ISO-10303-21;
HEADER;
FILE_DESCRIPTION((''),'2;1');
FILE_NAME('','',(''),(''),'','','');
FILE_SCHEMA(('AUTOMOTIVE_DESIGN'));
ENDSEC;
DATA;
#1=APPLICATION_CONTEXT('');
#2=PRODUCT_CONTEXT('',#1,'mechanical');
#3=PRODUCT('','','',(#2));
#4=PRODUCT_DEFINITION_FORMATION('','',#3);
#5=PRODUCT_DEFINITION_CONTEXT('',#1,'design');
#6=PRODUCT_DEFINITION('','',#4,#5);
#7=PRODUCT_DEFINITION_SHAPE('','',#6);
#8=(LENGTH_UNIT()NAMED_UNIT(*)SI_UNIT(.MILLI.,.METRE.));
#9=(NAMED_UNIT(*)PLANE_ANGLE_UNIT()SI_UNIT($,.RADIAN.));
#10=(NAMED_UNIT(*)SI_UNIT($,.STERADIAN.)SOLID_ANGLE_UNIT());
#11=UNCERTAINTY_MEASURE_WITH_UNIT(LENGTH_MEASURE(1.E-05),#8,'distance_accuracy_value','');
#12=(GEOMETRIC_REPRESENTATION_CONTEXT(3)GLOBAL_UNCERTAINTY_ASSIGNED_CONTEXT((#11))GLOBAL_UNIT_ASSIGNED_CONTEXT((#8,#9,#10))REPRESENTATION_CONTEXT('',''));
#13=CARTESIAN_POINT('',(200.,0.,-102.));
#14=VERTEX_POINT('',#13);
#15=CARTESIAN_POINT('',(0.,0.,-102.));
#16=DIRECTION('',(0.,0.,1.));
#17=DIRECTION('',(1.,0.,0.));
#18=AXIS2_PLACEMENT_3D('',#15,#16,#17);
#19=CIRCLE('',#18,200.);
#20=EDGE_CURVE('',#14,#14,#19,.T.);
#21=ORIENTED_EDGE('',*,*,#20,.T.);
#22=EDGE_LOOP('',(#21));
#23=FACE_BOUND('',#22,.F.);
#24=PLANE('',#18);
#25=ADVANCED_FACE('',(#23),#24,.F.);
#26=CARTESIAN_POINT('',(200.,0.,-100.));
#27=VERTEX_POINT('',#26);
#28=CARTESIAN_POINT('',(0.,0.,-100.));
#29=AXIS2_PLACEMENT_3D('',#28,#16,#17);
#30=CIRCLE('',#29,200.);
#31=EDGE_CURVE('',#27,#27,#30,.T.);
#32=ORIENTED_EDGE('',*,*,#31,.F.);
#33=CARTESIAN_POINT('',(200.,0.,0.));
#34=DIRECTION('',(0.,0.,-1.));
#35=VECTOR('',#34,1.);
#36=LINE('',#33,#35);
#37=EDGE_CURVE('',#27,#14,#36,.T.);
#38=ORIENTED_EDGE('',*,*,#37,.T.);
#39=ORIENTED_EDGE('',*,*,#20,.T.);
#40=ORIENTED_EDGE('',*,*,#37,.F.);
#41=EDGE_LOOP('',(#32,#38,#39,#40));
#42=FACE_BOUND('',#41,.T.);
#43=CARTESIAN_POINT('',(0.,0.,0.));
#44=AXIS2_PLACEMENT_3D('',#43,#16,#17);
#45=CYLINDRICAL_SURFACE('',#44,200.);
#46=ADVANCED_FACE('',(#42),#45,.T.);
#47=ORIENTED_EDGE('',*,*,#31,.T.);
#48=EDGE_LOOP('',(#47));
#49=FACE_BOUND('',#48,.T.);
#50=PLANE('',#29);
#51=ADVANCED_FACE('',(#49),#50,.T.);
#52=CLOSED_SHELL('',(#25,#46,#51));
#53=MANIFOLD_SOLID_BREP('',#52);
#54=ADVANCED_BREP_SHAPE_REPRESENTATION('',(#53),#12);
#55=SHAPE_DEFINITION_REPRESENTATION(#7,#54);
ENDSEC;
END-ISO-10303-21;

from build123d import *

# Parameters (mm, degrees)
F0_R     = 200
F2_DEPTH = 102
F3_DEPTH = 100


# Not quite as in the source:
# - the program builds the solid bodies; features that only make, move or delete a surface that nothing else refers to are left out


with BuildPart() as f2:
    # F0 (on Top) → F2 (new body)
    with BuildSketch(Plane.XY):
        Circle(F0_R)
    extrude(amount=-F2_DEPTH)

    # F0 (on Top) → F3 (cut)
    with BuildSketch(Plane.XY):
        Circle(F0_R)
    extrude(amount=-F3_DEPTH, mode=Mode.SUBTRACT)


solid = f2.part
